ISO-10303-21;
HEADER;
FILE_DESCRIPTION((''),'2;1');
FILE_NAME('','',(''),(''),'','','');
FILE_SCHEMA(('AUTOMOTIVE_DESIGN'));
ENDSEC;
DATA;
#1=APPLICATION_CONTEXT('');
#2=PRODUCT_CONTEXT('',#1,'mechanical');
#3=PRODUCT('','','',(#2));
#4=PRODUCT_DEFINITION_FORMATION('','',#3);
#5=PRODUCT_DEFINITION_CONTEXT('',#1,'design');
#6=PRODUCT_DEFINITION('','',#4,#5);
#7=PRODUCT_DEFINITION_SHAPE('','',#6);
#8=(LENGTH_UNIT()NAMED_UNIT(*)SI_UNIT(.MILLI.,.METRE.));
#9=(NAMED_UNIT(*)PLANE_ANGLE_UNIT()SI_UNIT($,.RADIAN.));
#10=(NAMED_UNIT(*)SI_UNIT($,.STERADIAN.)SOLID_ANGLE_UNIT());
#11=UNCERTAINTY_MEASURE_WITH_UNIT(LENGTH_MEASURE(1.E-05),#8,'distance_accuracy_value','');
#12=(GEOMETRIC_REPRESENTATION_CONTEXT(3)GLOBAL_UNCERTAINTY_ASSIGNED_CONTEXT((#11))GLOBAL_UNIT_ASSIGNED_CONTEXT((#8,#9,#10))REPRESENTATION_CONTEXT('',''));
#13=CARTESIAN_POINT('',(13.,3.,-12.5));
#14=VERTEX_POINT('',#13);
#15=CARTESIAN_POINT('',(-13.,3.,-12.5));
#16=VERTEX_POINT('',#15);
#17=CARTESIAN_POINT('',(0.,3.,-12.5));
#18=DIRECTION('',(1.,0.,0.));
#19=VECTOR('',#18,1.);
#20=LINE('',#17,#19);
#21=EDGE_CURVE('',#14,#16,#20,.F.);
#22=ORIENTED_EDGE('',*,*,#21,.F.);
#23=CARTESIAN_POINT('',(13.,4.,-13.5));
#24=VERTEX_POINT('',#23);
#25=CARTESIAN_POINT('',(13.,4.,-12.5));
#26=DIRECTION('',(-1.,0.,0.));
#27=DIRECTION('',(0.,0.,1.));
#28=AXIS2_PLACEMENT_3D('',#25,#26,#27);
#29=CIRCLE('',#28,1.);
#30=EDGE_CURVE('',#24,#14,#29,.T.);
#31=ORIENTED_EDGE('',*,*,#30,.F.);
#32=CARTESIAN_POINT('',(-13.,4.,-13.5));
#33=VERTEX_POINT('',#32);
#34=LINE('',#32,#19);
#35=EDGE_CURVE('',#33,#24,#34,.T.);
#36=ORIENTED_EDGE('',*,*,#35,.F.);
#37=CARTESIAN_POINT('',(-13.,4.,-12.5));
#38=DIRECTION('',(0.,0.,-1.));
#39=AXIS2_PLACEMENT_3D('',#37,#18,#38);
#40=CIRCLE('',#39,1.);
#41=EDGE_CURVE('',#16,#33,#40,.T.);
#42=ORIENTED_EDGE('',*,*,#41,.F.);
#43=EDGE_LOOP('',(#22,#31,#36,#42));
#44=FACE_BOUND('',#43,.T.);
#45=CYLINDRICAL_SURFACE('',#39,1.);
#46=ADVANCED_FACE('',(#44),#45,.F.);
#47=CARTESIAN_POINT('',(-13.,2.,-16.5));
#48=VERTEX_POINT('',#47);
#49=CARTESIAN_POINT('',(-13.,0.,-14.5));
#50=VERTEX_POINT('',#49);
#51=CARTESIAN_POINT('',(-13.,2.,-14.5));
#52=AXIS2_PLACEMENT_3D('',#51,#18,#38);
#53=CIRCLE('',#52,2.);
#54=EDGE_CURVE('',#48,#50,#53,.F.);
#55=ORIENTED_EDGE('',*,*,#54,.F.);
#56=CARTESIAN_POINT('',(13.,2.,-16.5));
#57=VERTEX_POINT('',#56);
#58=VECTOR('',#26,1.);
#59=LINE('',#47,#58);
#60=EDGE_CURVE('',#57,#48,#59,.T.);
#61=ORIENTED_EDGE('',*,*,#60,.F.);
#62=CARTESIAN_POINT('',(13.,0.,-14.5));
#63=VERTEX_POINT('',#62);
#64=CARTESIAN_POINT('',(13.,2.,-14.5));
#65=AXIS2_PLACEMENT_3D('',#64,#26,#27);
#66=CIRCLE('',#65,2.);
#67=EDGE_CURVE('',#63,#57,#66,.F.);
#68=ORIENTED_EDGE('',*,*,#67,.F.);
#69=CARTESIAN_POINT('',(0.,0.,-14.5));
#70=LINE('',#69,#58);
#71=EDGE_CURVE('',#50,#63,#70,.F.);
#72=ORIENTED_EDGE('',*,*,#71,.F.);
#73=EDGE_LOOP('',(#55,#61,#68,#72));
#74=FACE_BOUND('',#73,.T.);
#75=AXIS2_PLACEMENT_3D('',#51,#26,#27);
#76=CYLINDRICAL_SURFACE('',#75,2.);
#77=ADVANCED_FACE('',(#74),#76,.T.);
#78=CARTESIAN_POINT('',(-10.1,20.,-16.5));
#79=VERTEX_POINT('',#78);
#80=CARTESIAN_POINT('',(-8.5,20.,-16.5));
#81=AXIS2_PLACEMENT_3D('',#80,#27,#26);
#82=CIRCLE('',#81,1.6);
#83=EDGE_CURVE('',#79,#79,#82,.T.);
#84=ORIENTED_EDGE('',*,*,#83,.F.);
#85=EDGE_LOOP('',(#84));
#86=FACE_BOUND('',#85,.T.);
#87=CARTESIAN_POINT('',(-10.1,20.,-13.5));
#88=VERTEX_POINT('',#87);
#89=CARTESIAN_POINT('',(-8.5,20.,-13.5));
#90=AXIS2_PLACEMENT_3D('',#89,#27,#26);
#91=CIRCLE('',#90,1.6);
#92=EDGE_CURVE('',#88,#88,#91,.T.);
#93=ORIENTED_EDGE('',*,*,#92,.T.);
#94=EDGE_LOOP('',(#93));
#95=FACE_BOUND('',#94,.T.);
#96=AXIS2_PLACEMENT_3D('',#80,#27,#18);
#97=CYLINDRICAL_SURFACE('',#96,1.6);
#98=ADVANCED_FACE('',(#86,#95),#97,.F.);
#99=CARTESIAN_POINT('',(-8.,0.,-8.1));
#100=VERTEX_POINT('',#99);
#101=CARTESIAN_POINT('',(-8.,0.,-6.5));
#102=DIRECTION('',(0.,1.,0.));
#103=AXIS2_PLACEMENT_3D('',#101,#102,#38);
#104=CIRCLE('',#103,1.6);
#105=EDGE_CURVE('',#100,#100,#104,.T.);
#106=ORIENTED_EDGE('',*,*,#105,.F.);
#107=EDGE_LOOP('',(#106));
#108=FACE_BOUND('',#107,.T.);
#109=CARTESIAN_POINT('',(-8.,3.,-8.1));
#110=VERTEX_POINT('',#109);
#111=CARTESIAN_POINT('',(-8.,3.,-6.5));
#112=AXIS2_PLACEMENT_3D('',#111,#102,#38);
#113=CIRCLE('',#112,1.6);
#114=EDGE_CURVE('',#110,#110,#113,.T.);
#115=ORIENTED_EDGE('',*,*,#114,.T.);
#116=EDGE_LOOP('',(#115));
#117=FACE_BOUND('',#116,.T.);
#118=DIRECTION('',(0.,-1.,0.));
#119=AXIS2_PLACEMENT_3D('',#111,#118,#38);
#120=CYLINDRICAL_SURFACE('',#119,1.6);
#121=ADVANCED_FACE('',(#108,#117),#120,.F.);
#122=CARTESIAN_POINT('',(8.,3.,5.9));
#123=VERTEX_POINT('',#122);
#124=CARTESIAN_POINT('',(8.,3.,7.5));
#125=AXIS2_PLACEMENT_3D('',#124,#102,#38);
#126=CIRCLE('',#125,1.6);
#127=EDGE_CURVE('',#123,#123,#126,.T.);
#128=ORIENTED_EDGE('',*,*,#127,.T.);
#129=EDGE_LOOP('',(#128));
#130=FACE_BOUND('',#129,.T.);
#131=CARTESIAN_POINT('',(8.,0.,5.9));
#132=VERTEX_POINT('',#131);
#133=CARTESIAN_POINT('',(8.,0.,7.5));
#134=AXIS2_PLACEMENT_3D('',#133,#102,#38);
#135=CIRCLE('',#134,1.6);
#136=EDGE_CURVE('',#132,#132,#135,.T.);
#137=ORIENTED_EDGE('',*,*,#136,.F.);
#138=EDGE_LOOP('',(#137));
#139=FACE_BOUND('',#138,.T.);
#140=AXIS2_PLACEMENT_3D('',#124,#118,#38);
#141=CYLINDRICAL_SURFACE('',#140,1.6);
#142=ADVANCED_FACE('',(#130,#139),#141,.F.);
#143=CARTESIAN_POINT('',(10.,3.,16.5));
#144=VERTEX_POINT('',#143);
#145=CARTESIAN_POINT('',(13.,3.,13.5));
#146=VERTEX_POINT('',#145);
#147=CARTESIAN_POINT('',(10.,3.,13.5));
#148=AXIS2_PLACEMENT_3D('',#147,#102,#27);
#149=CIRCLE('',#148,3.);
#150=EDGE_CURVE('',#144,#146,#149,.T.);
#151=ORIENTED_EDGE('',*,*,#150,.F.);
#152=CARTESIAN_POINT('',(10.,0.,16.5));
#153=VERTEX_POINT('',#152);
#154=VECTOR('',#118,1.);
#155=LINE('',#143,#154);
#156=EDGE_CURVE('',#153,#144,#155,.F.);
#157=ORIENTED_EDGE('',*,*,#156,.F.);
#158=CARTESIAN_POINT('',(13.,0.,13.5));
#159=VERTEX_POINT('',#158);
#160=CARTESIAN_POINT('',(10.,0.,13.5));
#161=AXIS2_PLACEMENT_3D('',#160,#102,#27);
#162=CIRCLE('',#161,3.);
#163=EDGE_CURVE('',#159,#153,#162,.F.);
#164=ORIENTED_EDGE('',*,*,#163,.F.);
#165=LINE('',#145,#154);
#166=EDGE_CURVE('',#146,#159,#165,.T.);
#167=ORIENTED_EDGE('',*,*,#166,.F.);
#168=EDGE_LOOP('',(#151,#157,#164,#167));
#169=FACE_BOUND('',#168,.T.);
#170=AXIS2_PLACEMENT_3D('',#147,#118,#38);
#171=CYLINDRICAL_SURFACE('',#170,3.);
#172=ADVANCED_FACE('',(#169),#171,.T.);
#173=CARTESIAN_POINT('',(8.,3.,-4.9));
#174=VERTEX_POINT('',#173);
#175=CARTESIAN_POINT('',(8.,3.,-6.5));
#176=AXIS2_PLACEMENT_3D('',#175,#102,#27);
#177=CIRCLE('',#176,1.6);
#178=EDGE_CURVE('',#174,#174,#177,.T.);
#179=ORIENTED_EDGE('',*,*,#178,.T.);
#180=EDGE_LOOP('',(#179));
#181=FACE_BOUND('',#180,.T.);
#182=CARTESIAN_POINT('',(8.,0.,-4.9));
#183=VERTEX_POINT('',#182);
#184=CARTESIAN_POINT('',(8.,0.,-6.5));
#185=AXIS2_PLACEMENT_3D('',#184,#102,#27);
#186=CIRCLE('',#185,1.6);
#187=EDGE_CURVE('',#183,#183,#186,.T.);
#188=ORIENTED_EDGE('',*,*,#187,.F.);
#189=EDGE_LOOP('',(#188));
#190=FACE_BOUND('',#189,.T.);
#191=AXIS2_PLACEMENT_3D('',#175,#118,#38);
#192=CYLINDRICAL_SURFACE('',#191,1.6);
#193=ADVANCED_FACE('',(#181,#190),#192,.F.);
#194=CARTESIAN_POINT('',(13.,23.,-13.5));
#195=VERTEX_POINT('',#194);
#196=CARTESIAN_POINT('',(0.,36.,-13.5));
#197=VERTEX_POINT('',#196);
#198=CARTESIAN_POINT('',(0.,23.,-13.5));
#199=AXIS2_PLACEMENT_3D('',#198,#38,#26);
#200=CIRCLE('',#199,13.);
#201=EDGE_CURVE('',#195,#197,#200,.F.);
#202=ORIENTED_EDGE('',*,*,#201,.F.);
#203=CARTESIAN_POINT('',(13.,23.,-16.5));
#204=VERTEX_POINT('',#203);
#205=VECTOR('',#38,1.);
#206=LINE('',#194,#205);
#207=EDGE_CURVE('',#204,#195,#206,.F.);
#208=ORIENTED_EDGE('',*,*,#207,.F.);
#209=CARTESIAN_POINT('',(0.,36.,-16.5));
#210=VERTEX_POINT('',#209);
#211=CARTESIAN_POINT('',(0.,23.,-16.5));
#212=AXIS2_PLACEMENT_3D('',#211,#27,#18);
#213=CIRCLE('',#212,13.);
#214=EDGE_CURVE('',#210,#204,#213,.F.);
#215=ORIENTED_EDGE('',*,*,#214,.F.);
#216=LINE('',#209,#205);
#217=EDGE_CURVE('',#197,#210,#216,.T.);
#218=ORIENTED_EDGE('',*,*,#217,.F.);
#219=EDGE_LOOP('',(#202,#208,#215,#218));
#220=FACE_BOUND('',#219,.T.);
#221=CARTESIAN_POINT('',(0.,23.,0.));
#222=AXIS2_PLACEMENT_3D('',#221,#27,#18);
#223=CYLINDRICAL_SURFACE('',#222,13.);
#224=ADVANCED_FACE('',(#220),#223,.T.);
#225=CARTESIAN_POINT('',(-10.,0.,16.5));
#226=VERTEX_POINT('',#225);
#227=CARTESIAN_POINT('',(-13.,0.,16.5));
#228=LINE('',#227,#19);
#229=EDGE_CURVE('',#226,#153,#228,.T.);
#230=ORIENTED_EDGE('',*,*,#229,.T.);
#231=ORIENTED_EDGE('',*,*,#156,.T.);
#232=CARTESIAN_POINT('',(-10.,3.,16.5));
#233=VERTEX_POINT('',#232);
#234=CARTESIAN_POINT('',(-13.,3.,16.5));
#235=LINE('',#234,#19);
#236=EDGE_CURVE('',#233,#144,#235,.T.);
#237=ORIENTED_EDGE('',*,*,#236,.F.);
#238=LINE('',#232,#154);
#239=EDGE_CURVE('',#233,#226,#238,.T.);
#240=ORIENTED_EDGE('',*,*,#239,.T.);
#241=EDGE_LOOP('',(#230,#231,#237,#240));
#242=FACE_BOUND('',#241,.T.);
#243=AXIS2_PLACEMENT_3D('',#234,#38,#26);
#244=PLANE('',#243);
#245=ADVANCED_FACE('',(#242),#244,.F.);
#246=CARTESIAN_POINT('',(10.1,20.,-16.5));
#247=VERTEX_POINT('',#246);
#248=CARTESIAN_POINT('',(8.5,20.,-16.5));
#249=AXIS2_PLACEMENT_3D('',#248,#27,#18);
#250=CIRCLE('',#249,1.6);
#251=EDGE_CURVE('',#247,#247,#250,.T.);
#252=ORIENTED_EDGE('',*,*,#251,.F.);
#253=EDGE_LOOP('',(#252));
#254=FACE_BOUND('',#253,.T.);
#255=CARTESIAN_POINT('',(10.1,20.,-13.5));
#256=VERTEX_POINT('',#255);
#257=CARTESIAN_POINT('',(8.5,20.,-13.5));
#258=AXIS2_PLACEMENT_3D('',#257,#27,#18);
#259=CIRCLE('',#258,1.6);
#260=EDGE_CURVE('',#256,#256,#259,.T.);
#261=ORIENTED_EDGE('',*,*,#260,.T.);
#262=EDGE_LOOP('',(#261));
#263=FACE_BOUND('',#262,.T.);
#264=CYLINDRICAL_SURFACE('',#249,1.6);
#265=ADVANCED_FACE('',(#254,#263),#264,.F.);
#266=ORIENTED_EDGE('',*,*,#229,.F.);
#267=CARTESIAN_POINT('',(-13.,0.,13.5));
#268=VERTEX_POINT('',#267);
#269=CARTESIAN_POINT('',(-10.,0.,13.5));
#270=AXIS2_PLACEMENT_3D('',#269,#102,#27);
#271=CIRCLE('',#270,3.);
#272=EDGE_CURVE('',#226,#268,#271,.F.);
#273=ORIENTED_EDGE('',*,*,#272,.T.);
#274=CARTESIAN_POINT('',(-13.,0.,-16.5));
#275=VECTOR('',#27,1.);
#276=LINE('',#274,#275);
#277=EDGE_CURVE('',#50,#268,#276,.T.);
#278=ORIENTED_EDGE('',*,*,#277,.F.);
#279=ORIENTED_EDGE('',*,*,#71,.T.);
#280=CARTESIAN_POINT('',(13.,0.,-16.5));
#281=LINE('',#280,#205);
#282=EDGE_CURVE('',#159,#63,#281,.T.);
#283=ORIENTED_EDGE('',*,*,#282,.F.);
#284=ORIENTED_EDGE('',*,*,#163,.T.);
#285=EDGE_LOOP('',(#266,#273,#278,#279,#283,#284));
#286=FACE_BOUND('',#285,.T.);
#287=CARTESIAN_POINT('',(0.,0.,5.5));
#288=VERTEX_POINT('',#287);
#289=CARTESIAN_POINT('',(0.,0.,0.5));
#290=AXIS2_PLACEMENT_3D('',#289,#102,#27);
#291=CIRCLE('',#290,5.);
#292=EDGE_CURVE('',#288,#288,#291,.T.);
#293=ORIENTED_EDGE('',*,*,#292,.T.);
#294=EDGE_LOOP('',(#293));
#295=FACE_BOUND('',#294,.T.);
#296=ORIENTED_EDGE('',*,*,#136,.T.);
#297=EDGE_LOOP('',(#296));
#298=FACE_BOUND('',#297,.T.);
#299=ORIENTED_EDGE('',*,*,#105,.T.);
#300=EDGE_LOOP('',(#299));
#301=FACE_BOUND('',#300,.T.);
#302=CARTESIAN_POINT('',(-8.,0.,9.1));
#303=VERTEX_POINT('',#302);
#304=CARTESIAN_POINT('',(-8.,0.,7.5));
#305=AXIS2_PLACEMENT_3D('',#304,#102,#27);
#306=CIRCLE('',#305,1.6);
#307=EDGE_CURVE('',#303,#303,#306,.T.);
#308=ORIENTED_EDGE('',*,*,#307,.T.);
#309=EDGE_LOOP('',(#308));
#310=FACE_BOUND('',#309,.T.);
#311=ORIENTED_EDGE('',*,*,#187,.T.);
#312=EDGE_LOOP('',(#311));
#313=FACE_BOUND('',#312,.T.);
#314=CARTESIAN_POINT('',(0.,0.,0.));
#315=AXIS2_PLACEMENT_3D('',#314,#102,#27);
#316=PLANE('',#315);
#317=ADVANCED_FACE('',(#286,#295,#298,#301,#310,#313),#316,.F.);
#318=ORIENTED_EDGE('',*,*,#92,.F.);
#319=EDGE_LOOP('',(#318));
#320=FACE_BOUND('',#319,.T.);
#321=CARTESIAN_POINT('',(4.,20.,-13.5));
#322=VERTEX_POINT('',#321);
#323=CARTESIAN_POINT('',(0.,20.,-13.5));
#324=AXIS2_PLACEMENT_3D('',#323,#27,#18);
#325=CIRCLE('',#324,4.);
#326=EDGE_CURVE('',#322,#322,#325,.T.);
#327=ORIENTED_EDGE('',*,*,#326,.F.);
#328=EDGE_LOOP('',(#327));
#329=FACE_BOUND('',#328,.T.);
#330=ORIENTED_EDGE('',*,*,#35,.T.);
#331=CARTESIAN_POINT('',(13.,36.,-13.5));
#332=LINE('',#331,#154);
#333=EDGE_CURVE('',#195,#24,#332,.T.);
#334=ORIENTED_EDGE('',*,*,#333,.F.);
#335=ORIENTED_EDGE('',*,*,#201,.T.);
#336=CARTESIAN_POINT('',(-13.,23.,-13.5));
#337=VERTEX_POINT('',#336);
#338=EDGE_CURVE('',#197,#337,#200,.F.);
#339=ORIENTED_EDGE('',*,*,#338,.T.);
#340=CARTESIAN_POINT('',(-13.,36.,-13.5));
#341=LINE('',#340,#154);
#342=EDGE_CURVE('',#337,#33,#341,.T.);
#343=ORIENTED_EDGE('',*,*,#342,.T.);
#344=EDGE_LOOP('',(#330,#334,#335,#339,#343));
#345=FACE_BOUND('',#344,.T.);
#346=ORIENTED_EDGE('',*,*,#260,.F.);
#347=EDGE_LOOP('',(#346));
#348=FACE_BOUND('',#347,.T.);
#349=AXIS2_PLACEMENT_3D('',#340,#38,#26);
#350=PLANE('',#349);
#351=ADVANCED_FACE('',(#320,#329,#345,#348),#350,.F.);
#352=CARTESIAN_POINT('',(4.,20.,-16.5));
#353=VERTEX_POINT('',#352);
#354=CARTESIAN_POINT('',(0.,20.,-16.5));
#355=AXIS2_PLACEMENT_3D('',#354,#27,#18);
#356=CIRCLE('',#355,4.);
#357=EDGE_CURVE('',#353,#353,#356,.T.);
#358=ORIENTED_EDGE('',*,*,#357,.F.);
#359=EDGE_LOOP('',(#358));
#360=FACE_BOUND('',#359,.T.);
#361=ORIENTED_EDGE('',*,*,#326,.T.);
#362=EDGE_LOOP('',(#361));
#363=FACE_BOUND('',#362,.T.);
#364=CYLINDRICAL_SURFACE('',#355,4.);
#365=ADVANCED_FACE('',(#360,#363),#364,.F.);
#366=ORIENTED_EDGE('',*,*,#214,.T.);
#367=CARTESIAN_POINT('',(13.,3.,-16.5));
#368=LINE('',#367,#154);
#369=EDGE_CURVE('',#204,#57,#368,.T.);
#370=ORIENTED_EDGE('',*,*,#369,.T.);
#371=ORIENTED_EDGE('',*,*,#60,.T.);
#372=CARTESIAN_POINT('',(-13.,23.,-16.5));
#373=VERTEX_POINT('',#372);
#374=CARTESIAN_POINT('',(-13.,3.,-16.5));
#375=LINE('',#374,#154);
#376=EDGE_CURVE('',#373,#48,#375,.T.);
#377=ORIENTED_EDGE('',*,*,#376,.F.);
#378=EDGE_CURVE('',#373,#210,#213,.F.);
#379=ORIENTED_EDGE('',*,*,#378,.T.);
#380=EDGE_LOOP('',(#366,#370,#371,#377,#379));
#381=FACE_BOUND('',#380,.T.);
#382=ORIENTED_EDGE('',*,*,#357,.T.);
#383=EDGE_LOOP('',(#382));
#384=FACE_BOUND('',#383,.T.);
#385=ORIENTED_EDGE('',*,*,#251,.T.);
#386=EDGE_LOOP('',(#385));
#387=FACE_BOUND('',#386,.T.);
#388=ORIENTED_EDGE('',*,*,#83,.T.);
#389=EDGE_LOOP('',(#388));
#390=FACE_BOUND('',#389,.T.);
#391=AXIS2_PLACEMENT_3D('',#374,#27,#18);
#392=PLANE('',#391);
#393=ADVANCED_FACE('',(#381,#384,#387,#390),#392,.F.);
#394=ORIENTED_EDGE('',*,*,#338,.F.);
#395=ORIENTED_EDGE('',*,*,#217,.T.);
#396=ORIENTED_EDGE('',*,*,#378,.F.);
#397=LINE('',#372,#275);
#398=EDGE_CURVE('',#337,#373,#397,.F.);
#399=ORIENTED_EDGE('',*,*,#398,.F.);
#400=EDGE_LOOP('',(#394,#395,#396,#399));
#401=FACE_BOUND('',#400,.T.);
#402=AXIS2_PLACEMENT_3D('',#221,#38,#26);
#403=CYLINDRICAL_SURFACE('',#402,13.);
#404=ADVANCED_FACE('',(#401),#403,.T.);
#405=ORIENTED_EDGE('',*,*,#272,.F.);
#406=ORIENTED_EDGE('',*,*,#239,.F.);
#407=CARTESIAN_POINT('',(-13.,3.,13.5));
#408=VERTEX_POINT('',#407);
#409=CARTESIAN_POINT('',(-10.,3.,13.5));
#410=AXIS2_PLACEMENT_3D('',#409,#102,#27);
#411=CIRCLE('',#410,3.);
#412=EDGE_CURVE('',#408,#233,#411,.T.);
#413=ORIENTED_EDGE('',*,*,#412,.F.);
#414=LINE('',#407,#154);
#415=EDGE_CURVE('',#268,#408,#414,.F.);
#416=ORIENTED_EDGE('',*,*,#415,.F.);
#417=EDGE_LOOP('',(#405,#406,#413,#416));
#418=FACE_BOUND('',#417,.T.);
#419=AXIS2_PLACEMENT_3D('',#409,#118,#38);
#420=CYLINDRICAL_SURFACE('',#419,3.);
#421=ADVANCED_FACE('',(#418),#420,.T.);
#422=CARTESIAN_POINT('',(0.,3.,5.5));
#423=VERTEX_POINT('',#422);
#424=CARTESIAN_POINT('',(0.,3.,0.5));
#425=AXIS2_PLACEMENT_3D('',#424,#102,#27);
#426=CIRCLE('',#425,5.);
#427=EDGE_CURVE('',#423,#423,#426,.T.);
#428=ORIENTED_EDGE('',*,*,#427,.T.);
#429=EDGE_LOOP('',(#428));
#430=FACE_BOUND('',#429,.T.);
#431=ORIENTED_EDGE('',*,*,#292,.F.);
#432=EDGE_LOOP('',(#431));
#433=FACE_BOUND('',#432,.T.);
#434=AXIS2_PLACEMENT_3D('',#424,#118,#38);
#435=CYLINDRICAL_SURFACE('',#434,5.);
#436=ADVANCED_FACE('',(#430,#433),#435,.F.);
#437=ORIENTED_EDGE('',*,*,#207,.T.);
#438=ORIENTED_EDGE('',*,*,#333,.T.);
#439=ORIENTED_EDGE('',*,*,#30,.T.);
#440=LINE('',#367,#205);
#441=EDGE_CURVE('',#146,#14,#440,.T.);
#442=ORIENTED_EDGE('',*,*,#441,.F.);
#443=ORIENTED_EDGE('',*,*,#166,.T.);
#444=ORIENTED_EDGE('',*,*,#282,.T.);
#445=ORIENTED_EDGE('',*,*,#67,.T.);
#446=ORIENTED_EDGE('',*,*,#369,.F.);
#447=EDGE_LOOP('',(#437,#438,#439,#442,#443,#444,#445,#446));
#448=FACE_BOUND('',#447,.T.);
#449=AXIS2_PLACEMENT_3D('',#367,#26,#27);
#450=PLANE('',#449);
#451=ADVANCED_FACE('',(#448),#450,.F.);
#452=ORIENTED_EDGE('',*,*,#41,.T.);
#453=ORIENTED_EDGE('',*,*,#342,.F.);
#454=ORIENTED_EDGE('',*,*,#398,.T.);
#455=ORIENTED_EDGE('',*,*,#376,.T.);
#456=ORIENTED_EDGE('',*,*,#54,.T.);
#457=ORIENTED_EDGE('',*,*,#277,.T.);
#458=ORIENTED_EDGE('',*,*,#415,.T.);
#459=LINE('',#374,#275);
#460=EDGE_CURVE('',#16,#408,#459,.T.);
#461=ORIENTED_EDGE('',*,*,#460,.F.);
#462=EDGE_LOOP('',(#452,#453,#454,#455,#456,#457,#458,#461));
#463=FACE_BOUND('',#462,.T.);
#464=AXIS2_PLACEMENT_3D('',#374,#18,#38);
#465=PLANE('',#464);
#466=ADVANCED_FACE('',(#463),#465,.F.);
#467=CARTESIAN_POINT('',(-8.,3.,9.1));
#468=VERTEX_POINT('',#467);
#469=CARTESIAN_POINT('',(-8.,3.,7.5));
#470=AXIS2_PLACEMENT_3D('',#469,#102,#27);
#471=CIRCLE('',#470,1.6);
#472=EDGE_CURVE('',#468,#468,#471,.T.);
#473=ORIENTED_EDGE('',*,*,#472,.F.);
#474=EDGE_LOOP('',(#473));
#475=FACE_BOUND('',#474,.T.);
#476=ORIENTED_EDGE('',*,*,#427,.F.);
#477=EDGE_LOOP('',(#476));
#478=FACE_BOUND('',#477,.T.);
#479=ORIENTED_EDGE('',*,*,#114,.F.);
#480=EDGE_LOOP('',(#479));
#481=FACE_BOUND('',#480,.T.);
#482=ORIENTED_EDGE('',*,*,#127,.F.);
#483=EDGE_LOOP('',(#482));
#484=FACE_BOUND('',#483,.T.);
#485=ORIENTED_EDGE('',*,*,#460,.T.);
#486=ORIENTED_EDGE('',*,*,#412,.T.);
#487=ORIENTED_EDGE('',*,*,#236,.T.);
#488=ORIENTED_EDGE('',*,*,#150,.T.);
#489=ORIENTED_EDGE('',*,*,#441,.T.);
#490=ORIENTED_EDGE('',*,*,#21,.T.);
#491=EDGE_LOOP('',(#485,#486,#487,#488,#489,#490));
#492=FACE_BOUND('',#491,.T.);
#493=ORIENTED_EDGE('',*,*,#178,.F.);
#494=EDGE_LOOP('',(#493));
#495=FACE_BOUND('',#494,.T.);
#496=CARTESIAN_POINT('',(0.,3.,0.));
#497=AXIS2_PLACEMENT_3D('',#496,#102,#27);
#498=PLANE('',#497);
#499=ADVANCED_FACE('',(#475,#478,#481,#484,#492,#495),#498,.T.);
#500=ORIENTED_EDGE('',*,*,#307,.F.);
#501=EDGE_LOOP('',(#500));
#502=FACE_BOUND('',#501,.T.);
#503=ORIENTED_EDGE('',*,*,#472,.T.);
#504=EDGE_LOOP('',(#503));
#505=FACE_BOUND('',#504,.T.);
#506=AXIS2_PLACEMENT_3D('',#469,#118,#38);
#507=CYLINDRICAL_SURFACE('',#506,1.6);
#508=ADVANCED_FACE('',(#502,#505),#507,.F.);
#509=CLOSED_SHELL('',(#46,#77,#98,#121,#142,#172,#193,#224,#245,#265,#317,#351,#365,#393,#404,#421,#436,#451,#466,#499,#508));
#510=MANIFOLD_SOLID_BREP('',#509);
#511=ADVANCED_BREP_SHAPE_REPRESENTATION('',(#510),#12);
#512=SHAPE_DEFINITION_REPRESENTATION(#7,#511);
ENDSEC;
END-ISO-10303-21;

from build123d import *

# Parameters (mm, degrees)
SKETCH1_W           = 26
SKETCH1_H           = 33
SKETCH1_R           = 5
SKETCH1_R_2         = 1.6
BOSS_EXTRUDE1_DEPTH = 3
FILLET2_R           = 3
SKETCH2_W           = 26
SKETCH2_H           = 3
BOSS_EXTRUDE2_DEPTH = 33
FILLET3_R           = 13
SKETCH3_R           = 4
SKETCH3_R_2         = 1.6
CUT_EXTRUDE1_DEPTH  = 3
FILLET4_R           = 2
FILLET5_R           = 1


with BuildPart() as part:
    # Sketch1 → Boss-Extrude1 (new body)
    with BuildSketch(Plane(origin=(0, 0, 0), x_dir=(1, 0, 0), z_dir=(0, 1, 0))):
        Rectangle(SKETCH1_W, SKETCH1_H)
        with Locations(Location((0, -0.5, 0), (0, 0, 270))):
            Circle(SKETCH1_R, mode=Mode.SUBTRACT)
        with Locations(Location((8, 6.5, 0), (0, 0, 270))):
            Circle(SKETCH1_R_2, mode=Mode.SUBTRACT)
        with Locations(Location((-8, 6.5, 0), (0, 0, 90))):
            Circle(SKETCH1_R_2, mode=Mode.SUBTRACT)
        with Locations(Location((8, -7.5, 0), (0, 0, 90))):
            Circle(SKETCH1_R_2, mode=Mode.SUBTRACT)
        with Locations(Location((-8, -7.5, 0), (0, 0, 270))):
            Circle(SKETCH1_R_2, mode=Mode.SUBTRACT)
    extrude(amount=BOSS_EXTRUDE1_DEPTH)

    # Fillet2
    fillet2_edges = [part.edges().sort_by_distance(p)[0] for p in [
        (13, 1.5, 16.5),
        (-13, 1.5, 16.5),
    ]]
    fillet(fillet2_edges, radius=FILLET2_R)

    # Sketch2 → Boss-Extrude2 (add)
    with BuildSketch(Plane(origin=(0, 3, 0), x_dir=(1, 0, 0), z_dir=(0, 1, 0))):
        with Locations((0, 15)):
            Rectangle(SKETCH2_W, SKETCH2_H)
    extrude(amount=BOSS_EXTRUDE2_DEPTH)

    # Fillet3
    fillet3_edges = [part.edges().sort_by_distance(p)[0] for p in [
        (-13, 36, -15),
        (13, 36, -15),
    ]]
    fillet(fillet3_edges, radius=FILLET3_R - 0.0001)  # a hair under: the kernel refuses the full size

    # Sketch3 → Cut-Extrude1 (cut)
    with BuildSketch(Plane.XY.offset(-13.5)):
        with Locations((0, 20)):
            Circle(SKETCH3_R)
        with Locations((8.5, 20)):
            Circle(SKETCH3_R_2)
        with Locations(Location((-8.5, 20, 0), (0, 0, 180))):
            Circle(SKETCH3_R_2)
    extrude(amount=-CUT_EXTRUDE1_DEPTH, mode=Mode.SUBTRACT)

    # Fillet4
    fillet4_edges = [part.edges().sort_by_distance(p)[0] for p in [
        (0, 0, -16.5),
    ]]
    fillet(fillet4_edges, radius=FILLET4_R)

    # Fillet5
    fillet5_edges = [part.edges().sort_by_distance(p)[0] for p in [
        (0, 3, -13.5),
    ]]
    fillet(fillet5_edges, radius=FILLET5_R)


solid = part.part
